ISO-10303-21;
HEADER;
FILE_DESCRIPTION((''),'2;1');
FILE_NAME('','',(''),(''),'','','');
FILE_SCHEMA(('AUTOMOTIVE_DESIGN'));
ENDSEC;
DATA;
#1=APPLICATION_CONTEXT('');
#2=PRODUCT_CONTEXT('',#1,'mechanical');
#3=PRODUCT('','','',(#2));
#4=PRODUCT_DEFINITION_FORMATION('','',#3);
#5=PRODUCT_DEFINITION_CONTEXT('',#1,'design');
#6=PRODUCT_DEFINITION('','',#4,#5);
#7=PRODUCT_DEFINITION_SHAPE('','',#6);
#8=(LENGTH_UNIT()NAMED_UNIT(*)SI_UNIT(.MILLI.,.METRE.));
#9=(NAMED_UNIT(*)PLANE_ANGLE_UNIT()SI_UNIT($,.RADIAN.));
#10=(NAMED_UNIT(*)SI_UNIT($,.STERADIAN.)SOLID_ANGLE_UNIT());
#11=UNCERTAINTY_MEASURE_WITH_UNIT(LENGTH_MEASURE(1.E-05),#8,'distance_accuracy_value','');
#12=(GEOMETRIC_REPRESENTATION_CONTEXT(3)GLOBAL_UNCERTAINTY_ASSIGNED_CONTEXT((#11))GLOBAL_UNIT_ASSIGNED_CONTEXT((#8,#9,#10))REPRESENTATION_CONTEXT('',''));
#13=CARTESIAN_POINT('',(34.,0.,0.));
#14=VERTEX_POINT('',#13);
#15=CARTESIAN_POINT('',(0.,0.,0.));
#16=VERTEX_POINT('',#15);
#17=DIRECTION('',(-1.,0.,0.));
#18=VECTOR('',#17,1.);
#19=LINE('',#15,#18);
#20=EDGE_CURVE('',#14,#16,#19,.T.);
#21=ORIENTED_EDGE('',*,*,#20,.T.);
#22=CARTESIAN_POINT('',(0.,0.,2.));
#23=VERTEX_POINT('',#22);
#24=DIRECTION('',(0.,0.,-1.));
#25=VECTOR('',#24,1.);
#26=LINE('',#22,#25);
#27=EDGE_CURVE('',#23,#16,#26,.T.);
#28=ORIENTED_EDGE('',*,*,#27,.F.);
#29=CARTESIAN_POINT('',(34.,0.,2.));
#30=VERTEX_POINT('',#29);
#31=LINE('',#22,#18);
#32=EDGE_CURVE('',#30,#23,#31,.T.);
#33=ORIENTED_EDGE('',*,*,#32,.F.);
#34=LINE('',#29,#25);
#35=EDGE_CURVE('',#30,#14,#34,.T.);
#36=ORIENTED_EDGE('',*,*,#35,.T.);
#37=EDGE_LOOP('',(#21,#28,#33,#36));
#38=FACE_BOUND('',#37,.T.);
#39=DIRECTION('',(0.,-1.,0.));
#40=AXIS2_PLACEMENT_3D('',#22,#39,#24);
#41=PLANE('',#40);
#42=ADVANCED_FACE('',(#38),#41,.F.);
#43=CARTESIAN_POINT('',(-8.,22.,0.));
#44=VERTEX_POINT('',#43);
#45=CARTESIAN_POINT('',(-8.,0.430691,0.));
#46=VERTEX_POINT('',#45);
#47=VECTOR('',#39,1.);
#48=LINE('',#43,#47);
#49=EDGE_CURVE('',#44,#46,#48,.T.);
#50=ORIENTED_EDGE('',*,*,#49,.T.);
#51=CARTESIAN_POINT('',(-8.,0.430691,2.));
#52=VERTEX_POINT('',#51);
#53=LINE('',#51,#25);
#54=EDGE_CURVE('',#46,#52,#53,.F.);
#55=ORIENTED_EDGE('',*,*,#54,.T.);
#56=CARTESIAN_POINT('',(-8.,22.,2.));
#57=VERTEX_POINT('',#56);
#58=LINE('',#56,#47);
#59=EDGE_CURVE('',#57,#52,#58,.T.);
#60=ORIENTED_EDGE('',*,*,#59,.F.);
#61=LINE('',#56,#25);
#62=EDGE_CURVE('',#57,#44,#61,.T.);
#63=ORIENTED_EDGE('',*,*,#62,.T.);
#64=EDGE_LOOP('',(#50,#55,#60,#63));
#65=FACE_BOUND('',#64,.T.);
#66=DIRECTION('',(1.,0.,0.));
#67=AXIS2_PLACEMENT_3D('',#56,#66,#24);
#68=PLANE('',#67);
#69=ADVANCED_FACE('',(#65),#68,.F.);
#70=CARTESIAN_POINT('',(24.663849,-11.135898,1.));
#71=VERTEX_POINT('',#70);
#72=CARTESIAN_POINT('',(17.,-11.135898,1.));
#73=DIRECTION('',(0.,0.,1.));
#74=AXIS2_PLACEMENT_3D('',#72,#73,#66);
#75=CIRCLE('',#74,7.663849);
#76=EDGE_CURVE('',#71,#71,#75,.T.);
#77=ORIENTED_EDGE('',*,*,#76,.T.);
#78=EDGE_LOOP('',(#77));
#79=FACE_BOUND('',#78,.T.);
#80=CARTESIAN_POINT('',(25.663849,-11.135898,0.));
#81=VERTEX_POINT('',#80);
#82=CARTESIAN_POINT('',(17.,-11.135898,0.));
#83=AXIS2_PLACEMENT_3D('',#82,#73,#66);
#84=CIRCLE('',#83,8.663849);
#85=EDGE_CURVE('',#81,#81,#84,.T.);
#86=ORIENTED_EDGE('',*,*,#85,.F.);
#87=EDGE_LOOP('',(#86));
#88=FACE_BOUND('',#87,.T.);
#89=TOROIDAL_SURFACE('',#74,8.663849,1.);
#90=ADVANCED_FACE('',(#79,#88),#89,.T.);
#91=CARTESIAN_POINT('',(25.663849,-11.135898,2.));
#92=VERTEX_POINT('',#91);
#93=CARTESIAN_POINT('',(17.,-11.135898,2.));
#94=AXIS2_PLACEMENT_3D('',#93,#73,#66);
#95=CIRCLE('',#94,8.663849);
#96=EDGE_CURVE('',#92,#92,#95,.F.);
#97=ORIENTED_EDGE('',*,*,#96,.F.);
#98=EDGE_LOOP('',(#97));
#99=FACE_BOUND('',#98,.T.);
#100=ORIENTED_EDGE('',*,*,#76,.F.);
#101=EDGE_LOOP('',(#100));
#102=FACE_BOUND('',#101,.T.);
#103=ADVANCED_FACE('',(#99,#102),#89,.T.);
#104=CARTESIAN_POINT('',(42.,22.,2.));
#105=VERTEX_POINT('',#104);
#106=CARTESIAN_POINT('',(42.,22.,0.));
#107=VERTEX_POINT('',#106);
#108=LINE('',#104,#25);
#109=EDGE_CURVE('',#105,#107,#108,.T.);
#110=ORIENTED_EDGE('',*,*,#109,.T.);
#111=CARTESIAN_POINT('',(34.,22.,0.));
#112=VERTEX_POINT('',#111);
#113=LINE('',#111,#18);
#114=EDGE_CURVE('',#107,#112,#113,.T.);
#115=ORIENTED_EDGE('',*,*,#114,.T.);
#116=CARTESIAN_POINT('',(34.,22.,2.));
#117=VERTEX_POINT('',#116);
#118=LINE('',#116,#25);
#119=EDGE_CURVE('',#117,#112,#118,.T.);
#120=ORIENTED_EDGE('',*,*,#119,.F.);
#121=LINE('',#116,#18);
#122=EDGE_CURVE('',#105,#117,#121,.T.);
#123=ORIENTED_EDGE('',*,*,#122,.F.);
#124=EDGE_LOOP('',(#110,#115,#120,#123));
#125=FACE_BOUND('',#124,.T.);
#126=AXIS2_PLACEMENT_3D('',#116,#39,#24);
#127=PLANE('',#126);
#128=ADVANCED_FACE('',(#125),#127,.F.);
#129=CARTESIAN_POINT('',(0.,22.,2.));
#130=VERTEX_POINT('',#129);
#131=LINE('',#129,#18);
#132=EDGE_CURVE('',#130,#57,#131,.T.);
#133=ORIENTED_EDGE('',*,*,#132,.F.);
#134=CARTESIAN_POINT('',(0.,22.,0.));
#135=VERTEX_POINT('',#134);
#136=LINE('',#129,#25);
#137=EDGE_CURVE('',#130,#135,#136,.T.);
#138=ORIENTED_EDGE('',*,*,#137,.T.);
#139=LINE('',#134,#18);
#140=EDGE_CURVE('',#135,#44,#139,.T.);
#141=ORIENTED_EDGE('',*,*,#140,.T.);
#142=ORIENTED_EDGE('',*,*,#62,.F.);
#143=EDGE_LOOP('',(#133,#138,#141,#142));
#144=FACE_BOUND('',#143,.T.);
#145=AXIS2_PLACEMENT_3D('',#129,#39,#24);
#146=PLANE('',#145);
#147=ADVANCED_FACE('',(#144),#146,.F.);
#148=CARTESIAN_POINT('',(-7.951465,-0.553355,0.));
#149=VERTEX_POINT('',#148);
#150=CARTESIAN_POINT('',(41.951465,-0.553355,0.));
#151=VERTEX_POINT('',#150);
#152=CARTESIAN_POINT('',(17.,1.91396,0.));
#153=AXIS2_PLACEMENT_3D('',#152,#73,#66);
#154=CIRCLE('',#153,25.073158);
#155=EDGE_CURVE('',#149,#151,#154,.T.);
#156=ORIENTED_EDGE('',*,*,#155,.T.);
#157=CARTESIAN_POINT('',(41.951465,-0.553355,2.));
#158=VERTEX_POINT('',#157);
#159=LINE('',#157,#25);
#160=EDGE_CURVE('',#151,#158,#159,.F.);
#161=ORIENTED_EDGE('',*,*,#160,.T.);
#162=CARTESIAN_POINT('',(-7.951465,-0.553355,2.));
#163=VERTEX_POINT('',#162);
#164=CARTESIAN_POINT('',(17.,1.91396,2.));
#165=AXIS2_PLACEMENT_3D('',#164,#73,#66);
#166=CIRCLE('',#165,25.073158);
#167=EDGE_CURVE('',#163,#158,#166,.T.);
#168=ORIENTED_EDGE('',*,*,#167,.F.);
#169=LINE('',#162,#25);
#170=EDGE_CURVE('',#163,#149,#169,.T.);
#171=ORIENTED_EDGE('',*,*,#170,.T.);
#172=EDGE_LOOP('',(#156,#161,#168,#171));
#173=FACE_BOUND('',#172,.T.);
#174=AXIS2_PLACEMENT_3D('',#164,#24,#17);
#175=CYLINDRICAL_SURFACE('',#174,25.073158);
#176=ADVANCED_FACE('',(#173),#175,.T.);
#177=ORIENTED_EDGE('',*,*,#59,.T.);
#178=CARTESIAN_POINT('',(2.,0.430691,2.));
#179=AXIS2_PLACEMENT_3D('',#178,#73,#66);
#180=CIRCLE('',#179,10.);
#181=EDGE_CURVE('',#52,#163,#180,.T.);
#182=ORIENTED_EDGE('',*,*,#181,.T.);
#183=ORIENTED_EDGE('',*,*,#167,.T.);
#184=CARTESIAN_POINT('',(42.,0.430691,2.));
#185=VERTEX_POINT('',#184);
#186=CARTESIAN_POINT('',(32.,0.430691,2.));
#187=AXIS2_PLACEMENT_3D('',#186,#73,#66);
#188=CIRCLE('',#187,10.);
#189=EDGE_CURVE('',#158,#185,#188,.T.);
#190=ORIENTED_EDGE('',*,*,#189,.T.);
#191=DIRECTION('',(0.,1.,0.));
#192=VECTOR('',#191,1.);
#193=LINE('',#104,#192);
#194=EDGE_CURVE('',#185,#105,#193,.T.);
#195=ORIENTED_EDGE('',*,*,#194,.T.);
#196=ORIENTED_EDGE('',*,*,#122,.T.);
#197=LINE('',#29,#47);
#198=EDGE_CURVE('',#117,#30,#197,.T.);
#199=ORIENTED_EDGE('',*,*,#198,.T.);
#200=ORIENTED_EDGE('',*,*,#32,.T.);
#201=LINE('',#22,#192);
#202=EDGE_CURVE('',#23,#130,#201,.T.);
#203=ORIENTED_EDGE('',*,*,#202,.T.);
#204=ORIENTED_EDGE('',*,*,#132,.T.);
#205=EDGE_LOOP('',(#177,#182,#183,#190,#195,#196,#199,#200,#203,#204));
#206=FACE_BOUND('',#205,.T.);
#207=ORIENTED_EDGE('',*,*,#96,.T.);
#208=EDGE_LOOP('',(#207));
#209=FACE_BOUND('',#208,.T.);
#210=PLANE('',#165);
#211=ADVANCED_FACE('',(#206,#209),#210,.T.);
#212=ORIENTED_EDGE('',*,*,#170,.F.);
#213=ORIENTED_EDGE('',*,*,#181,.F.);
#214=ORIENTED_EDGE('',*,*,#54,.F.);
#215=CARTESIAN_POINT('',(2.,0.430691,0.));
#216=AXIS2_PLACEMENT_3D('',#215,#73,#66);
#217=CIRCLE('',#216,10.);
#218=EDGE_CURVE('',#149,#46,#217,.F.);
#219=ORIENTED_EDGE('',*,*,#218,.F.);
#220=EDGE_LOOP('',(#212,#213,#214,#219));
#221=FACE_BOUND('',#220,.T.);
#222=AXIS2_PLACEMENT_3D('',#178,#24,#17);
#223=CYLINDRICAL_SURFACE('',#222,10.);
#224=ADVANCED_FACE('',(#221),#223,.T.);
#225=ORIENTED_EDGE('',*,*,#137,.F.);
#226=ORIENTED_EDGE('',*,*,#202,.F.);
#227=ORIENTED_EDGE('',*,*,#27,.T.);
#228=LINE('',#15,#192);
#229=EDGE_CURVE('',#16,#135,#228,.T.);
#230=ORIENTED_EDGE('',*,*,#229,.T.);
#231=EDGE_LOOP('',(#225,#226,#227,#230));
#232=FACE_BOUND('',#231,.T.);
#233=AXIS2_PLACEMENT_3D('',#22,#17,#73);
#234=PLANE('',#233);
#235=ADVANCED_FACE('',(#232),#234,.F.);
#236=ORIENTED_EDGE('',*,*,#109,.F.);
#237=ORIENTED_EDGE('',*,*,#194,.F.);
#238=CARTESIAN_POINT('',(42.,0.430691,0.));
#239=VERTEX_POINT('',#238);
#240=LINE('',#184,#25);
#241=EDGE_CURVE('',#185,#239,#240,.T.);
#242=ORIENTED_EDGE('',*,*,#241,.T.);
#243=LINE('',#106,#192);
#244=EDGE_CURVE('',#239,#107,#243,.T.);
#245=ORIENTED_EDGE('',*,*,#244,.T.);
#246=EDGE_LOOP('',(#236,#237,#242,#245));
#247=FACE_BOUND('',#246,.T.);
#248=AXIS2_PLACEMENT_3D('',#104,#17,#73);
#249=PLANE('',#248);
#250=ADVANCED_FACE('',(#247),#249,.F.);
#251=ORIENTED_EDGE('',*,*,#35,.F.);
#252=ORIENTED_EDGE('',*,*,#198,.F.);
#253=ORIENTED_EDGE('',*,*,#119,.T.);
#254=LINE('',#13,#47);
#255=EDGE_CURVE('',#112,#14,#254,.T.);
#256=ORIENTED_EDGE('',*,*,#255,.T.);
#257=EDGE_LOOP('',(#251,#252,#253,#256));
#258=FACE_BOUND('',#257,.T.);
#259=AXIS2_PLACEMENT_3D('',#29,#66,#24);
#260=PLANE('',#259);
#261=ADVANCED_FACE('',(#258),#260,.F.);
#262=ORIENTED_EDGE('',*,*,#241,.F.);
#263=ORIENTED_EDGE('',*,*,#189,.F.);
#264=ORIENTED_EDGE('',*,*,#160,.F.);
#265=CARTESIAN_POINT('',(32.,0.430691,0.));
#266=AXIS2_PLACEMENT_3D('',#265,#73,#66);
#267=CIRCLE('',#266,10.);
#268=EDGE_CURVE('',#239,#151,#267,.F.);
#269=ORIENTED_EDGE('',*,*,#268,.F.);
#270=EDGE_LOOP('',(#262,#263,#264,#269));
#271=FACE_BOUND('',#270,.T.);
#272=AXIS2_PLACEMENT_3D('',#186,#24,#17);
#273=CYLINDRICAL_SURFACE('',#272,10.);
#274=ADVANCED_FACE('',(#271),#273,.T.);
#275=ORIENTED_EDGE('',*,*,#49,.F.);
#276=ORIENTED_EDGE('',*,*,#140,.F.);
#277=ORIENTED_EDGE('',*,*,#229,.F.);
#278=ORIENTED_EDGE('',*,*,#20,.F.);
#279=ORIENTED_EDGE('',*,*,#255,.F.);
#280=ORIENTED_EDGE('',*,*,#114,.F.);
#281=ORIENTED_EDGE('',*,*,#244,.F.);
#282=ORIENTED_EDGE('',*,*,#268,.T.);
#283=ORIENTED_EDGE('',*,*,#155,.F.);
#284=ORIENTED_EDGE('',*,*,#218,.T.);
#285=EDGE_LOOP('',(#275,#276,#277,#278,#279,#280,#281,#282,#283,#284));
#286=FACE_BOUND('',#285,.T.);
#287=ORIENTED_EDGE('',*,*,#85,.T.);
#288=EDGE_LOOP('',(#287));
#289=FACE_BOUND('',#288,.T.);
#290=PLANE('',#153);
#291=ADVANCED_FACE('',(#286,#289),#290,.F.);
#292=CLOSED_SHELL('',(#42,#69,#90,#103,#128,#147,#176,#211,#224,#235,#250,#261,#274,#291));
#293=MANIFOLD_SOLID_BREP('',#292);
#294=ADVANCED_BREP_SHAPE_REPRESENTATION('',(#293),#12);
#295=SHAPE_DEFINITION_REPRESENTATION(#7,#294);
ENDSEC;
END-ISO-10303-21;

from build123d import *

# Parameters (mm, degrees)
ESQUISSE1_R        = 7.66384886
BOSS_EXTRU_1_DEPTH = 2
CONG_1_R           = 10
CONG_2_R           = 1


# Some blends are built 0.0001 mm under size
with BuildPart() as part:
    # Esquisse1 → Boss.-Extru.1 (new body)
    with BuildSketch(Plane.XY):
        with BuildLine():
            Line((0, 0), (34, 0))
            Line((34, 0), (34, 22))
            Line((34, 22), (42, 22))
            Line((42, 22), (42, 0))
            ThreePointArc((42, 0), (17, -23.15919806), (-8, 0))
            Line((-8, 0), (-8, 22))
            Line((-8, 22), (0, 22))
            Line((0, 22), (0, 0))
        make_face()
        with Locations((17, -11.135898069)):
            Circle(ESQUISSE1_R, mode=Mode.SUBTRACT)
    extrude(amount=BOSS_EXTRU_1_DEPTH)

    # Congé1
    # the kernel refuses this fillet: 10 mm, written as the material it takes off along each edge
    with BuildSketch(Plane(origin=(42, 0, -1.388699458), x_dir=(0, 1, 0), z_dir=(0, 0, 1))) as cong_1_piece_1:
        with BuildLine():
            CenterArc((0.430691066, 10), CONG_1_R, 264.352690034, 5.647309966)
            ThreePointArc((-0.553355337, 0.048535149), (-0.276812081, 0.022735123), (0, 0))
            Line((0, 0), (0.430691066, 0))
        make_face()
    extrude(amount=4.777398915, mode=Mode.SUBTRACT)
    with BuildSketch(Plane(origin=(-8, 0, -1.388699458), x_dir=(0.08737518565273034, -0.9961754749702236, 0), z_dir=(0, 0, 1))) as cong_1_piece_2:
        with BuildLine():
            CenterArc((0.444707979, 9.999386462), CONG_1_R, 264.987378699, 5.647309966)
            Line((-0.429043877, 0.037631712), (0, 0))
            ThreePointArc((0, 0), (0.277739892, -0.001538335), (0.555479783, 0))
        make_face()
    extrude(amount=4.777398915, mode=Mode.SUBTRACT)

    # Congé2
    cong_2_edges = [part.edges().sort_by_distance(p)[0] for p in [
        (9.33615114, -11.135898069, 0),
        (9.33615114, -11.135898069, 2),
    ]]
    fillet(cong_2_edges, radius=CONG_2_R - 0.0001)  # a hair under: the kernel refuses the full size


solid = part.part
